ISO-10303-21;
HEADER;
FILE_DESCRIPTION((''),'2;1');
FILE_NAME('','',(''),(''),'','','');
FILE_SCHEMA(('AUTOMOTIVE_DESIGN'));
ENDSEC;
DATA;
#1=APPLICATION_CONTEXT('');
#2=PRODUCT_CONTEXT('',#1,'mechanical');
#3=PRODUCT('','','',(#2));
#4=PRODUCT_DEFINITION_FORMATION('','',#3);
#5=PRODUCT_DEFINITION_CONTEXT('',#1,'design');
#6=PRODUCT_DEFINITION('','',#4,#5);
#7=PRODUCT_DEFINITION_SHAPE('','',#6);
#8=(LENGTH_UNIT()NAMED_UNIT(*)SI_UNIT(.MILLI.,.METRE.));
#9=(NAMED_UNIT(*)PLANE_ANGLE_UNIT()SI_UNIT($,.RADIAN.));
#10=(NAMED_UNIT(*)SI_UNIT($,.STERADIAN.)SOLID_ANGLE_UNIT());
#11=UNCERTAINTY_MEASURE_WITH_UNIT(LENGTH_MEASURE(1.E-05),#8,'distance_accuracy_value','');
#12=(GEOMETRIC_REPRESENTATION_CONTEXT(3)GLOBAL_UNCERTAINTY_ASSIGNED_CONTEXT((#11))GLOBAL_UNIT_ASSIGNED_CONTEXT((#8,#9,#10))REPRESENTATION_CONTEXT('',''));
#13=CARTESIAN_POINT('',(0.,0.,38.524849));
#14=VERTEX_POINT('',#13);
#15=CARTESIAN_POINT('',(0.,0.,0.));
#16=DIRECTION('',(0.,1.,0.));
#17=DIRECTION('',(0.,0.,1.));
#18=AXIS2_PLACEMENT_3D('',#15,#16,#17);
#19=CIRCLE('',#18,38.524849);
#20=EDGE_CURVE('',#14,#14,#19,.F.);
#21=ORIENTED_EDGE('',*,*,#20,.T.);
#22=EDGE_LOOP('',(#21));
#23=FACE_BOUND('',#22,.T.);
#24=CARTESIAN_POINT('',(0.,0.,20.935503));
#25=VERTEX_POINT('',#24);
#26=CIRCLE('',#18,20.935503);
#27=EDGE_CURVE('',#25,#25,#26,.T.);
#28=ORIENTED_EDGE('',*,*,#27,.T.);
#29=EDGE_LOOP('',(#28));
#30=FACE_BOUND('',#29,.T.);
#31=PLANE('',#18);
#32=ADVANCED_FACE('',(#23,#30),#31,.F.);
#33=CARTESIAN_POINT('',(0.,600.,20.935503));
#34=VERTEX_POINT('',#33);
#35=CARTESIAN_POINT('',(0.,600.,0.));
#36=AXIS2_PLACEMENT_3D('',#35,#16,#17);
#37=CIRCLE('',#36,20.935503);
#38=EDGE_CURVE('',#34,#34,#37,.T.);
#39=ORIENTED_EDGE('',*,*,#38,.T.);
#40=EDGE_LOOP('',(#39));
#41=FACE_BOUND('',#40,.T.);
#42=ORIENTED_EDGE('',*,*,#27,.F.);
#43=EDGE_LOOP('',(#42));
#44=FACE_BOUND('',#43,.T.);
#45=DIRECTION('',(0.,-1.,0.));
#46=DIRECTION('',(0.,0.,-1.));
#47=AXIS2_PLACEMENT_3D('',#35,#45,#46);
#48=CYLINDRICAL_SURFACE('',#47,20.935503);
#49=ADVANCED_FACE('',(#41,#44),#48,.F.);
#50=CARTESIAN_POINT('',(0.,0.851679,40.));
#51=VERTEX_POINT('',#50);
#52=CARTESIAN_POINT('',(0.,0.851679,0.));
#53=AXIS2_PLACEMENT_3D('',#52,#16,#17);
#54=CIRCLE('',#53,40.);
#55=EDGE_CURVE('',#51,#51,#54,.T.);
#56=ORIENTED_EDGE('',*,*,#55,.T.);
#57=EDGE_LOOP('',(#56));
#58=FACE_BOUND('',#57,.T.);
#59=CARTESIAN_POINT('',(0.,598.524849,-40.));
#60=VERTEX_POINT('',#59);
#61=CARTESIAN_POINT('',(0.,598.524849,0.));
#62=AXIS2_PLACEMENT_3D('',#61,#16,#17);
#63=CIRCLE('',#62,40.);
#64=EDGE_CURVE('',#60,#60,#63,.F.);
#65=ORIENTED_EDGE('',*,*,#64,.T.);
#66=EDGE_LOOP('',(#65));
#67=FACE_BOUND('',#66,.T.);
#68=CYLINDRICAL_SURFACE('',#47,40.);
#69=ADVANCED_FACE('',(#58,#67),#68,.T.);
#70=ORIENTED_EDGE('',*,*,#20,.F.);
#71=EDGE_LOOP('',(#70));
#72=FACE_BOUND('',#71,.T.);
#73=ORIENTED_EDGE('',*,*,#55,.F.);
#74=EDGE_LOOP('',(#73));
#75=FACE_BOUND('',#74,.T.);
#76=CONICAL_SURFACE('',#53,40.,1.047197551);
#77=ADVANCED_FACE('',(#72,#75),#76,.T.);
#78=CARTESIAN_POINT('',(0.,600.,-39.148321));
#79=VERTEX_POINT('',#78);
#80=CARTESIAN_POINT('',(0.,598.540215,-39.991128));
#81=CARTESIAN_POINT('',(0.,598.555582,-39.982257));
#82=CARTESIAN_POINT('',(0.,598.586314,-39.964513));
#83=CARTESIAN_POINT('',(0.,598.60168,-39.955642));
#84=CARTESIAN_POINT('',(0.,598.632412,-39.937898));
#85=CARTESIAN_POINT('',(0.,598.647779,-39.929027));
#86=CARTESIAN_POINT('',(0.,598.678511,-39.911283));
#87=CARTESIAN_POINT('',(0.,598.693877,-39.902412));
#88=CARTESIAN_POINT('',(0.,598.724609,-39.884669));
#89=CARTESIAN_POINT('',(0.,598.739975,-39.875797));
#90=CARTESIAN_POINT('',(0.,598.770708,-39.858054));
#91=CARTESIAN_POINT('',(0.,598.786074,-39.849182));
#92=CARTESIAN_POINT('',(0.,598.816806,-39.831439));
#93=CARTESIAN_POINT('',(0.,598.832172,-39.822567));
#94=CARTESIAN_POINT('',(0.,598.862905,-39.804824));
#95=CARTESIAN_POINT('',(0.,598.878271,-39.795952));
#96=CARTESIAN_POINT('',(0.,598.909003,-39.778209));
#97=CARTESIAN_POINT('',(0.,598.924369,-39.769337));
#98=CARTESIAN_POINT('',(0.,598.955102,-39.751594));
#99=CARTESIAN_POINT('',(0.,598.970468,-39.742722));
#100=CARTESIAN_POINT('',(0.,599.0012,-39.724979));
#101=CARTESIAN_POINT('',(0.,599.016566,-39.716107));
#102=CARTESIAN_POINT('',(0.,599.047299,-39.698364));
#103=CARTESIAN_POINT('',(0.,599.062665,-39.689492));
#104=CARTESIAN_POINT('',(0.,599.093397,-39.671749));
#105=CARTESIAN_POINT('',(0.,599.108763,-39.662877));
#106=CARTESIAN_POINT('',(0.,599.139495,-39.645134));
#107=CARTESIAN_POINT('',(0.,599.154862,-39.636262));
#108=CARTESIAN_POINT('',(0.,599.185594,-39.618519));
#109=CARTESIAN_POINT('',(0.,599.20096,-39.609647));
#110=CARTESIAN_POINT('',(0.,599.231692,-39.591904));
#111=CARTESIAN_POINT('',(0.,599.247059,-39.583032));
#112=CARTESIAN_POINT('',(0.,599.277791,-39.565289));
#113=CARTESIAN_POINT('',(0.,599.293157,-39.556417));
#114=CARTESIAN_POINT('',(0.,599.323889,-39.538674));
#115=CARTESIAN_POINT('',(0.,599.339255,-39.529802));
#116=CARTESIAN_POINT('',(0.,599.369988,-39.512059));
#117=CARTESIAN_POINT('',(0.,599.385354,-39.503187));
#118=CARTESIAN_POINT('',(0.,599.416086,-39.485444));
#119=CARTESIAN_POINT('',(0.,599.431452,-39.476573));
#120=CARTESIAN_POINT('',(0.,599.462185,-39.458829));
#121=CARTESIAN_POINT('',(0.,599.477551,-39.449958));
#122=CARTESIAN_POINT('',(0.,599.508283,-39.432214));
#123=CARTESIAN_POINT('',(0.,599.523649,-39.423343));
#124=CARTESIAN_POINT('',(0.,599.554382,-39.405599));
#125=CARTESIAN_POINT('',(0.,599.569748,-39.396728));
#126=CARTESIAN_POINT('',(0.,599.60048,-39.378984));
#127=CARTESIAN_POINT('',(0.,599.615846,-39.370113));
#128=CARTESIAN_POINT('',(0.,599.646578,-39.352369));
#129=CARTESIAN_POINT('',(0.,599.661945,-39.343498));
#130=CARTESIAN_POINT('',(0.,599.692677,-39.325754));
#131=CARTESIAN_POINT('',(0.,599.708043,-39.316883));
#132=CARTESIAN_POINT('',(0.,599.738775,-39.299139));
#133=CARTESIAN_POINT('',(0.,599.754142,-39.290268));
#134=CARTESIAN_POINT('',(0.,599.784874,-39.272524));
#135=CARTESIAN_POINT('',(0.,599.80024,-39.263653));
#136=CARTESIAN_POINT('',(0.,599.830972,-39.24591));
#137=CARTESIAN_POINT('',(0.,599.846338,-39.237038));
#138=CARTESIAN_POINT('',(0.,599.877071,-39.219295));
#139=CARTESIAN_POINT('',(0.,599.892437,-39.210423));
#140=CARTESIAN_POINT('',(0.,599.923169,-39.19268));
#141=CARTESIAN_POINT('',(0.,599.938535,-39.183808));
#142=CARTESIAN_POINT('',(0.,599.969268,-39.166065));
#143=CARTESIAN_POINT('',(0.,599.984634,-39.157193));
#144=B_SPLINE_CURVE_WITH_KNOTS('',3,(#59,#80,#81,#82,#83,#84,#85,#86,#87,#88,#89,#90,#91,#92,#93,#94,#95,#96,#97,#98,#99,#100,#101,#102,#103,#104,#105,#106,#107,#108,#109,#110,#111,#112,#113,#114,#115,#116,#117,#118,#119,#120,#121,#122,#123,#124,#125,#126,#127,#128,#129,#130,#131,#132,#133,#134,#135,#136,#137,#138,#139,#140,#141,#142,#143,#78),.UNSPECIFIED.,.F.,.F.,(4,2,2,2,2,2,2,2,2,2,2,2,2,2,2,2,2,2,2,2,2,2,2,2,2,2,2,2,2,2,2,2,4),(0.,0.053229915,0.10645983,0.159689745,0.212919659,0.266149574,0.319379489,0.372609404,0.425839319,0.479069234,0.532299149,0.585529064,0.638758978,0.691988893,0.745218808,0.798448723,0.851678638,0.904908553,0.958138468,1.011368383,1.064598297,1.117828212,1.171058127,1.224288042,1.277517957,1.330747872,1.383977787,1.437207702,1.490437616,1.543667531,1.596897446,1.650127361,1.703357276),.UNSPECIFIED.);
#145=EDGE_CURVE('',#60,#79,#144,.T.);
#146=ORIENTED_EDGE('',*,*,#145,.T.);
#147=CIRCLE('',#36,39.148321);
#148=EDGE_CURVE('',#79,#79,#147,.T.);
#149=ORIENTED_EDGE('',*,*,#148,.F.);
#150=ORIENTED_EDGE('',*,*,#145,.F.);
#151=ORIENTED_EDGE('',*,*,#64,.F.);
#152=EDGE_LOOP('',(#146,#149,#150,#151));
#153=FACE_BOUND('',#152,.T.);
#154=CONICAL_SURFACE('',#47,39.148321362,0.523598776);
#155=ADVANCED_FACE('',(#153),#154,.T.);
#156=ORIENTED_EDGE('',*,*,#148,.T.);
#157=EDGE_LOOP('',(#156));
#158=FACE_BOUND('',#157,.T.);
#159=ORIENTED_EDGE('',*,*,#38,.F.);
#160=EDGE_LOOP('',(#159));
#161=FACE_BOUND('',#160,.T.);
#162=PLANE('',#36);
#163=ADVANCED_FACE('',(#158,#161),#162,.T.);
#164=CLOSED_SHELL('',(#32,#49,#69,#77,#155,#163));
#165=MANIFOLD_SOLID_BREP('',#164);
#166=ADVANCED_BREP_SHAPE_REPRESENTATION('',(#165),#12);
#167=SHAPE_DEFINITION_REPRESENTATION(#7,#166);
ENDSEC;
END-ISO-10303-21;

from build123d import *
from OCP.BRepFilletAPI import BRepFilletAPI_MakeChamfer

# Parameters (mm, degrees)
SKETCH1_R           = 40
BOSS_EXTRUDE1_DEPTH = 600
SKETCH2_R           = 20.935503309
CUT_EXTRUDE1_DEPTH  = 603.660766933
CHAMFER1_SIZE       = 1.475150673
CHAMFER1_SIZE2      = 0.851678638


with BuildPart() as part:
    # Sketch1 → Boss-Extrude1 (new body)
    with BuildSketch(Plane(origin=(0, 0, 0), x_dir=(1, 0, 0), z_dir=(0, 1, 0))):
        Circle(SKETCH1_R)
    extrude(amount=BOSS_EXTRUDE1_DEPTH)

    # Sketch2 → Cut-Extrude1 (cut, through all)
    with BuildSketch(Plane(origin=(0, 0, 0), x_dir=(1, 0, 0), z_dir=(0, 1, 0))):
        Circle(SKETCH2_R)
    extrude(amount=CUT_EXTRUDE1_DEPTH, mode=Mode.SUBTRACT)

    # Chamfer1: one chamfer whose edges measure the first distance from different faces: ONE call of the kernel's chamfer builder (chamfer() names one face for all edges)
    chamfer1_edges_1 = [part.edges().sort_by_distance(p)[0] for p in [
        (-40, 600, 0),
    ]]
    chamfer1_side_1 = [part.faces().sort_by_distance(p)[0] for p in [
        (-40, 300, 0),
    ]]
    chamfer1_edges_2 = [part.edges().sort_by_distance(p)[0] for p in [
        (-40, 0, 0),
    ]]
    chamfer1_side_2 = [part.faces().sort_by_distance(p)[0] for p in [
        (-38.86862915, 0, 0),
    ]]
    chamfer1 = BRepFilletAPI_MakeChamfer(part.part.solid().wrapped)
    for e in chamfer1_edges_1:
        chamfer1.Add(CHAMFER1_SIZE, CHAMFER1_SIZE2, e.wrapped, chamfer1_side_1[0].wrapped)  # the first distance lies on this face
    for e in chamfer1_edges_2:
        chamfer1.Add(CHAMFER1_SIZE, CHAMFER1_SIZE2, e.wrapped, chamfer1_side_2[0].wrapped)  # the first distance lies on this face
    add(Compound.cast(chamfer1.Shape()), mode=Mode.REPLACE)


solid = part.part
